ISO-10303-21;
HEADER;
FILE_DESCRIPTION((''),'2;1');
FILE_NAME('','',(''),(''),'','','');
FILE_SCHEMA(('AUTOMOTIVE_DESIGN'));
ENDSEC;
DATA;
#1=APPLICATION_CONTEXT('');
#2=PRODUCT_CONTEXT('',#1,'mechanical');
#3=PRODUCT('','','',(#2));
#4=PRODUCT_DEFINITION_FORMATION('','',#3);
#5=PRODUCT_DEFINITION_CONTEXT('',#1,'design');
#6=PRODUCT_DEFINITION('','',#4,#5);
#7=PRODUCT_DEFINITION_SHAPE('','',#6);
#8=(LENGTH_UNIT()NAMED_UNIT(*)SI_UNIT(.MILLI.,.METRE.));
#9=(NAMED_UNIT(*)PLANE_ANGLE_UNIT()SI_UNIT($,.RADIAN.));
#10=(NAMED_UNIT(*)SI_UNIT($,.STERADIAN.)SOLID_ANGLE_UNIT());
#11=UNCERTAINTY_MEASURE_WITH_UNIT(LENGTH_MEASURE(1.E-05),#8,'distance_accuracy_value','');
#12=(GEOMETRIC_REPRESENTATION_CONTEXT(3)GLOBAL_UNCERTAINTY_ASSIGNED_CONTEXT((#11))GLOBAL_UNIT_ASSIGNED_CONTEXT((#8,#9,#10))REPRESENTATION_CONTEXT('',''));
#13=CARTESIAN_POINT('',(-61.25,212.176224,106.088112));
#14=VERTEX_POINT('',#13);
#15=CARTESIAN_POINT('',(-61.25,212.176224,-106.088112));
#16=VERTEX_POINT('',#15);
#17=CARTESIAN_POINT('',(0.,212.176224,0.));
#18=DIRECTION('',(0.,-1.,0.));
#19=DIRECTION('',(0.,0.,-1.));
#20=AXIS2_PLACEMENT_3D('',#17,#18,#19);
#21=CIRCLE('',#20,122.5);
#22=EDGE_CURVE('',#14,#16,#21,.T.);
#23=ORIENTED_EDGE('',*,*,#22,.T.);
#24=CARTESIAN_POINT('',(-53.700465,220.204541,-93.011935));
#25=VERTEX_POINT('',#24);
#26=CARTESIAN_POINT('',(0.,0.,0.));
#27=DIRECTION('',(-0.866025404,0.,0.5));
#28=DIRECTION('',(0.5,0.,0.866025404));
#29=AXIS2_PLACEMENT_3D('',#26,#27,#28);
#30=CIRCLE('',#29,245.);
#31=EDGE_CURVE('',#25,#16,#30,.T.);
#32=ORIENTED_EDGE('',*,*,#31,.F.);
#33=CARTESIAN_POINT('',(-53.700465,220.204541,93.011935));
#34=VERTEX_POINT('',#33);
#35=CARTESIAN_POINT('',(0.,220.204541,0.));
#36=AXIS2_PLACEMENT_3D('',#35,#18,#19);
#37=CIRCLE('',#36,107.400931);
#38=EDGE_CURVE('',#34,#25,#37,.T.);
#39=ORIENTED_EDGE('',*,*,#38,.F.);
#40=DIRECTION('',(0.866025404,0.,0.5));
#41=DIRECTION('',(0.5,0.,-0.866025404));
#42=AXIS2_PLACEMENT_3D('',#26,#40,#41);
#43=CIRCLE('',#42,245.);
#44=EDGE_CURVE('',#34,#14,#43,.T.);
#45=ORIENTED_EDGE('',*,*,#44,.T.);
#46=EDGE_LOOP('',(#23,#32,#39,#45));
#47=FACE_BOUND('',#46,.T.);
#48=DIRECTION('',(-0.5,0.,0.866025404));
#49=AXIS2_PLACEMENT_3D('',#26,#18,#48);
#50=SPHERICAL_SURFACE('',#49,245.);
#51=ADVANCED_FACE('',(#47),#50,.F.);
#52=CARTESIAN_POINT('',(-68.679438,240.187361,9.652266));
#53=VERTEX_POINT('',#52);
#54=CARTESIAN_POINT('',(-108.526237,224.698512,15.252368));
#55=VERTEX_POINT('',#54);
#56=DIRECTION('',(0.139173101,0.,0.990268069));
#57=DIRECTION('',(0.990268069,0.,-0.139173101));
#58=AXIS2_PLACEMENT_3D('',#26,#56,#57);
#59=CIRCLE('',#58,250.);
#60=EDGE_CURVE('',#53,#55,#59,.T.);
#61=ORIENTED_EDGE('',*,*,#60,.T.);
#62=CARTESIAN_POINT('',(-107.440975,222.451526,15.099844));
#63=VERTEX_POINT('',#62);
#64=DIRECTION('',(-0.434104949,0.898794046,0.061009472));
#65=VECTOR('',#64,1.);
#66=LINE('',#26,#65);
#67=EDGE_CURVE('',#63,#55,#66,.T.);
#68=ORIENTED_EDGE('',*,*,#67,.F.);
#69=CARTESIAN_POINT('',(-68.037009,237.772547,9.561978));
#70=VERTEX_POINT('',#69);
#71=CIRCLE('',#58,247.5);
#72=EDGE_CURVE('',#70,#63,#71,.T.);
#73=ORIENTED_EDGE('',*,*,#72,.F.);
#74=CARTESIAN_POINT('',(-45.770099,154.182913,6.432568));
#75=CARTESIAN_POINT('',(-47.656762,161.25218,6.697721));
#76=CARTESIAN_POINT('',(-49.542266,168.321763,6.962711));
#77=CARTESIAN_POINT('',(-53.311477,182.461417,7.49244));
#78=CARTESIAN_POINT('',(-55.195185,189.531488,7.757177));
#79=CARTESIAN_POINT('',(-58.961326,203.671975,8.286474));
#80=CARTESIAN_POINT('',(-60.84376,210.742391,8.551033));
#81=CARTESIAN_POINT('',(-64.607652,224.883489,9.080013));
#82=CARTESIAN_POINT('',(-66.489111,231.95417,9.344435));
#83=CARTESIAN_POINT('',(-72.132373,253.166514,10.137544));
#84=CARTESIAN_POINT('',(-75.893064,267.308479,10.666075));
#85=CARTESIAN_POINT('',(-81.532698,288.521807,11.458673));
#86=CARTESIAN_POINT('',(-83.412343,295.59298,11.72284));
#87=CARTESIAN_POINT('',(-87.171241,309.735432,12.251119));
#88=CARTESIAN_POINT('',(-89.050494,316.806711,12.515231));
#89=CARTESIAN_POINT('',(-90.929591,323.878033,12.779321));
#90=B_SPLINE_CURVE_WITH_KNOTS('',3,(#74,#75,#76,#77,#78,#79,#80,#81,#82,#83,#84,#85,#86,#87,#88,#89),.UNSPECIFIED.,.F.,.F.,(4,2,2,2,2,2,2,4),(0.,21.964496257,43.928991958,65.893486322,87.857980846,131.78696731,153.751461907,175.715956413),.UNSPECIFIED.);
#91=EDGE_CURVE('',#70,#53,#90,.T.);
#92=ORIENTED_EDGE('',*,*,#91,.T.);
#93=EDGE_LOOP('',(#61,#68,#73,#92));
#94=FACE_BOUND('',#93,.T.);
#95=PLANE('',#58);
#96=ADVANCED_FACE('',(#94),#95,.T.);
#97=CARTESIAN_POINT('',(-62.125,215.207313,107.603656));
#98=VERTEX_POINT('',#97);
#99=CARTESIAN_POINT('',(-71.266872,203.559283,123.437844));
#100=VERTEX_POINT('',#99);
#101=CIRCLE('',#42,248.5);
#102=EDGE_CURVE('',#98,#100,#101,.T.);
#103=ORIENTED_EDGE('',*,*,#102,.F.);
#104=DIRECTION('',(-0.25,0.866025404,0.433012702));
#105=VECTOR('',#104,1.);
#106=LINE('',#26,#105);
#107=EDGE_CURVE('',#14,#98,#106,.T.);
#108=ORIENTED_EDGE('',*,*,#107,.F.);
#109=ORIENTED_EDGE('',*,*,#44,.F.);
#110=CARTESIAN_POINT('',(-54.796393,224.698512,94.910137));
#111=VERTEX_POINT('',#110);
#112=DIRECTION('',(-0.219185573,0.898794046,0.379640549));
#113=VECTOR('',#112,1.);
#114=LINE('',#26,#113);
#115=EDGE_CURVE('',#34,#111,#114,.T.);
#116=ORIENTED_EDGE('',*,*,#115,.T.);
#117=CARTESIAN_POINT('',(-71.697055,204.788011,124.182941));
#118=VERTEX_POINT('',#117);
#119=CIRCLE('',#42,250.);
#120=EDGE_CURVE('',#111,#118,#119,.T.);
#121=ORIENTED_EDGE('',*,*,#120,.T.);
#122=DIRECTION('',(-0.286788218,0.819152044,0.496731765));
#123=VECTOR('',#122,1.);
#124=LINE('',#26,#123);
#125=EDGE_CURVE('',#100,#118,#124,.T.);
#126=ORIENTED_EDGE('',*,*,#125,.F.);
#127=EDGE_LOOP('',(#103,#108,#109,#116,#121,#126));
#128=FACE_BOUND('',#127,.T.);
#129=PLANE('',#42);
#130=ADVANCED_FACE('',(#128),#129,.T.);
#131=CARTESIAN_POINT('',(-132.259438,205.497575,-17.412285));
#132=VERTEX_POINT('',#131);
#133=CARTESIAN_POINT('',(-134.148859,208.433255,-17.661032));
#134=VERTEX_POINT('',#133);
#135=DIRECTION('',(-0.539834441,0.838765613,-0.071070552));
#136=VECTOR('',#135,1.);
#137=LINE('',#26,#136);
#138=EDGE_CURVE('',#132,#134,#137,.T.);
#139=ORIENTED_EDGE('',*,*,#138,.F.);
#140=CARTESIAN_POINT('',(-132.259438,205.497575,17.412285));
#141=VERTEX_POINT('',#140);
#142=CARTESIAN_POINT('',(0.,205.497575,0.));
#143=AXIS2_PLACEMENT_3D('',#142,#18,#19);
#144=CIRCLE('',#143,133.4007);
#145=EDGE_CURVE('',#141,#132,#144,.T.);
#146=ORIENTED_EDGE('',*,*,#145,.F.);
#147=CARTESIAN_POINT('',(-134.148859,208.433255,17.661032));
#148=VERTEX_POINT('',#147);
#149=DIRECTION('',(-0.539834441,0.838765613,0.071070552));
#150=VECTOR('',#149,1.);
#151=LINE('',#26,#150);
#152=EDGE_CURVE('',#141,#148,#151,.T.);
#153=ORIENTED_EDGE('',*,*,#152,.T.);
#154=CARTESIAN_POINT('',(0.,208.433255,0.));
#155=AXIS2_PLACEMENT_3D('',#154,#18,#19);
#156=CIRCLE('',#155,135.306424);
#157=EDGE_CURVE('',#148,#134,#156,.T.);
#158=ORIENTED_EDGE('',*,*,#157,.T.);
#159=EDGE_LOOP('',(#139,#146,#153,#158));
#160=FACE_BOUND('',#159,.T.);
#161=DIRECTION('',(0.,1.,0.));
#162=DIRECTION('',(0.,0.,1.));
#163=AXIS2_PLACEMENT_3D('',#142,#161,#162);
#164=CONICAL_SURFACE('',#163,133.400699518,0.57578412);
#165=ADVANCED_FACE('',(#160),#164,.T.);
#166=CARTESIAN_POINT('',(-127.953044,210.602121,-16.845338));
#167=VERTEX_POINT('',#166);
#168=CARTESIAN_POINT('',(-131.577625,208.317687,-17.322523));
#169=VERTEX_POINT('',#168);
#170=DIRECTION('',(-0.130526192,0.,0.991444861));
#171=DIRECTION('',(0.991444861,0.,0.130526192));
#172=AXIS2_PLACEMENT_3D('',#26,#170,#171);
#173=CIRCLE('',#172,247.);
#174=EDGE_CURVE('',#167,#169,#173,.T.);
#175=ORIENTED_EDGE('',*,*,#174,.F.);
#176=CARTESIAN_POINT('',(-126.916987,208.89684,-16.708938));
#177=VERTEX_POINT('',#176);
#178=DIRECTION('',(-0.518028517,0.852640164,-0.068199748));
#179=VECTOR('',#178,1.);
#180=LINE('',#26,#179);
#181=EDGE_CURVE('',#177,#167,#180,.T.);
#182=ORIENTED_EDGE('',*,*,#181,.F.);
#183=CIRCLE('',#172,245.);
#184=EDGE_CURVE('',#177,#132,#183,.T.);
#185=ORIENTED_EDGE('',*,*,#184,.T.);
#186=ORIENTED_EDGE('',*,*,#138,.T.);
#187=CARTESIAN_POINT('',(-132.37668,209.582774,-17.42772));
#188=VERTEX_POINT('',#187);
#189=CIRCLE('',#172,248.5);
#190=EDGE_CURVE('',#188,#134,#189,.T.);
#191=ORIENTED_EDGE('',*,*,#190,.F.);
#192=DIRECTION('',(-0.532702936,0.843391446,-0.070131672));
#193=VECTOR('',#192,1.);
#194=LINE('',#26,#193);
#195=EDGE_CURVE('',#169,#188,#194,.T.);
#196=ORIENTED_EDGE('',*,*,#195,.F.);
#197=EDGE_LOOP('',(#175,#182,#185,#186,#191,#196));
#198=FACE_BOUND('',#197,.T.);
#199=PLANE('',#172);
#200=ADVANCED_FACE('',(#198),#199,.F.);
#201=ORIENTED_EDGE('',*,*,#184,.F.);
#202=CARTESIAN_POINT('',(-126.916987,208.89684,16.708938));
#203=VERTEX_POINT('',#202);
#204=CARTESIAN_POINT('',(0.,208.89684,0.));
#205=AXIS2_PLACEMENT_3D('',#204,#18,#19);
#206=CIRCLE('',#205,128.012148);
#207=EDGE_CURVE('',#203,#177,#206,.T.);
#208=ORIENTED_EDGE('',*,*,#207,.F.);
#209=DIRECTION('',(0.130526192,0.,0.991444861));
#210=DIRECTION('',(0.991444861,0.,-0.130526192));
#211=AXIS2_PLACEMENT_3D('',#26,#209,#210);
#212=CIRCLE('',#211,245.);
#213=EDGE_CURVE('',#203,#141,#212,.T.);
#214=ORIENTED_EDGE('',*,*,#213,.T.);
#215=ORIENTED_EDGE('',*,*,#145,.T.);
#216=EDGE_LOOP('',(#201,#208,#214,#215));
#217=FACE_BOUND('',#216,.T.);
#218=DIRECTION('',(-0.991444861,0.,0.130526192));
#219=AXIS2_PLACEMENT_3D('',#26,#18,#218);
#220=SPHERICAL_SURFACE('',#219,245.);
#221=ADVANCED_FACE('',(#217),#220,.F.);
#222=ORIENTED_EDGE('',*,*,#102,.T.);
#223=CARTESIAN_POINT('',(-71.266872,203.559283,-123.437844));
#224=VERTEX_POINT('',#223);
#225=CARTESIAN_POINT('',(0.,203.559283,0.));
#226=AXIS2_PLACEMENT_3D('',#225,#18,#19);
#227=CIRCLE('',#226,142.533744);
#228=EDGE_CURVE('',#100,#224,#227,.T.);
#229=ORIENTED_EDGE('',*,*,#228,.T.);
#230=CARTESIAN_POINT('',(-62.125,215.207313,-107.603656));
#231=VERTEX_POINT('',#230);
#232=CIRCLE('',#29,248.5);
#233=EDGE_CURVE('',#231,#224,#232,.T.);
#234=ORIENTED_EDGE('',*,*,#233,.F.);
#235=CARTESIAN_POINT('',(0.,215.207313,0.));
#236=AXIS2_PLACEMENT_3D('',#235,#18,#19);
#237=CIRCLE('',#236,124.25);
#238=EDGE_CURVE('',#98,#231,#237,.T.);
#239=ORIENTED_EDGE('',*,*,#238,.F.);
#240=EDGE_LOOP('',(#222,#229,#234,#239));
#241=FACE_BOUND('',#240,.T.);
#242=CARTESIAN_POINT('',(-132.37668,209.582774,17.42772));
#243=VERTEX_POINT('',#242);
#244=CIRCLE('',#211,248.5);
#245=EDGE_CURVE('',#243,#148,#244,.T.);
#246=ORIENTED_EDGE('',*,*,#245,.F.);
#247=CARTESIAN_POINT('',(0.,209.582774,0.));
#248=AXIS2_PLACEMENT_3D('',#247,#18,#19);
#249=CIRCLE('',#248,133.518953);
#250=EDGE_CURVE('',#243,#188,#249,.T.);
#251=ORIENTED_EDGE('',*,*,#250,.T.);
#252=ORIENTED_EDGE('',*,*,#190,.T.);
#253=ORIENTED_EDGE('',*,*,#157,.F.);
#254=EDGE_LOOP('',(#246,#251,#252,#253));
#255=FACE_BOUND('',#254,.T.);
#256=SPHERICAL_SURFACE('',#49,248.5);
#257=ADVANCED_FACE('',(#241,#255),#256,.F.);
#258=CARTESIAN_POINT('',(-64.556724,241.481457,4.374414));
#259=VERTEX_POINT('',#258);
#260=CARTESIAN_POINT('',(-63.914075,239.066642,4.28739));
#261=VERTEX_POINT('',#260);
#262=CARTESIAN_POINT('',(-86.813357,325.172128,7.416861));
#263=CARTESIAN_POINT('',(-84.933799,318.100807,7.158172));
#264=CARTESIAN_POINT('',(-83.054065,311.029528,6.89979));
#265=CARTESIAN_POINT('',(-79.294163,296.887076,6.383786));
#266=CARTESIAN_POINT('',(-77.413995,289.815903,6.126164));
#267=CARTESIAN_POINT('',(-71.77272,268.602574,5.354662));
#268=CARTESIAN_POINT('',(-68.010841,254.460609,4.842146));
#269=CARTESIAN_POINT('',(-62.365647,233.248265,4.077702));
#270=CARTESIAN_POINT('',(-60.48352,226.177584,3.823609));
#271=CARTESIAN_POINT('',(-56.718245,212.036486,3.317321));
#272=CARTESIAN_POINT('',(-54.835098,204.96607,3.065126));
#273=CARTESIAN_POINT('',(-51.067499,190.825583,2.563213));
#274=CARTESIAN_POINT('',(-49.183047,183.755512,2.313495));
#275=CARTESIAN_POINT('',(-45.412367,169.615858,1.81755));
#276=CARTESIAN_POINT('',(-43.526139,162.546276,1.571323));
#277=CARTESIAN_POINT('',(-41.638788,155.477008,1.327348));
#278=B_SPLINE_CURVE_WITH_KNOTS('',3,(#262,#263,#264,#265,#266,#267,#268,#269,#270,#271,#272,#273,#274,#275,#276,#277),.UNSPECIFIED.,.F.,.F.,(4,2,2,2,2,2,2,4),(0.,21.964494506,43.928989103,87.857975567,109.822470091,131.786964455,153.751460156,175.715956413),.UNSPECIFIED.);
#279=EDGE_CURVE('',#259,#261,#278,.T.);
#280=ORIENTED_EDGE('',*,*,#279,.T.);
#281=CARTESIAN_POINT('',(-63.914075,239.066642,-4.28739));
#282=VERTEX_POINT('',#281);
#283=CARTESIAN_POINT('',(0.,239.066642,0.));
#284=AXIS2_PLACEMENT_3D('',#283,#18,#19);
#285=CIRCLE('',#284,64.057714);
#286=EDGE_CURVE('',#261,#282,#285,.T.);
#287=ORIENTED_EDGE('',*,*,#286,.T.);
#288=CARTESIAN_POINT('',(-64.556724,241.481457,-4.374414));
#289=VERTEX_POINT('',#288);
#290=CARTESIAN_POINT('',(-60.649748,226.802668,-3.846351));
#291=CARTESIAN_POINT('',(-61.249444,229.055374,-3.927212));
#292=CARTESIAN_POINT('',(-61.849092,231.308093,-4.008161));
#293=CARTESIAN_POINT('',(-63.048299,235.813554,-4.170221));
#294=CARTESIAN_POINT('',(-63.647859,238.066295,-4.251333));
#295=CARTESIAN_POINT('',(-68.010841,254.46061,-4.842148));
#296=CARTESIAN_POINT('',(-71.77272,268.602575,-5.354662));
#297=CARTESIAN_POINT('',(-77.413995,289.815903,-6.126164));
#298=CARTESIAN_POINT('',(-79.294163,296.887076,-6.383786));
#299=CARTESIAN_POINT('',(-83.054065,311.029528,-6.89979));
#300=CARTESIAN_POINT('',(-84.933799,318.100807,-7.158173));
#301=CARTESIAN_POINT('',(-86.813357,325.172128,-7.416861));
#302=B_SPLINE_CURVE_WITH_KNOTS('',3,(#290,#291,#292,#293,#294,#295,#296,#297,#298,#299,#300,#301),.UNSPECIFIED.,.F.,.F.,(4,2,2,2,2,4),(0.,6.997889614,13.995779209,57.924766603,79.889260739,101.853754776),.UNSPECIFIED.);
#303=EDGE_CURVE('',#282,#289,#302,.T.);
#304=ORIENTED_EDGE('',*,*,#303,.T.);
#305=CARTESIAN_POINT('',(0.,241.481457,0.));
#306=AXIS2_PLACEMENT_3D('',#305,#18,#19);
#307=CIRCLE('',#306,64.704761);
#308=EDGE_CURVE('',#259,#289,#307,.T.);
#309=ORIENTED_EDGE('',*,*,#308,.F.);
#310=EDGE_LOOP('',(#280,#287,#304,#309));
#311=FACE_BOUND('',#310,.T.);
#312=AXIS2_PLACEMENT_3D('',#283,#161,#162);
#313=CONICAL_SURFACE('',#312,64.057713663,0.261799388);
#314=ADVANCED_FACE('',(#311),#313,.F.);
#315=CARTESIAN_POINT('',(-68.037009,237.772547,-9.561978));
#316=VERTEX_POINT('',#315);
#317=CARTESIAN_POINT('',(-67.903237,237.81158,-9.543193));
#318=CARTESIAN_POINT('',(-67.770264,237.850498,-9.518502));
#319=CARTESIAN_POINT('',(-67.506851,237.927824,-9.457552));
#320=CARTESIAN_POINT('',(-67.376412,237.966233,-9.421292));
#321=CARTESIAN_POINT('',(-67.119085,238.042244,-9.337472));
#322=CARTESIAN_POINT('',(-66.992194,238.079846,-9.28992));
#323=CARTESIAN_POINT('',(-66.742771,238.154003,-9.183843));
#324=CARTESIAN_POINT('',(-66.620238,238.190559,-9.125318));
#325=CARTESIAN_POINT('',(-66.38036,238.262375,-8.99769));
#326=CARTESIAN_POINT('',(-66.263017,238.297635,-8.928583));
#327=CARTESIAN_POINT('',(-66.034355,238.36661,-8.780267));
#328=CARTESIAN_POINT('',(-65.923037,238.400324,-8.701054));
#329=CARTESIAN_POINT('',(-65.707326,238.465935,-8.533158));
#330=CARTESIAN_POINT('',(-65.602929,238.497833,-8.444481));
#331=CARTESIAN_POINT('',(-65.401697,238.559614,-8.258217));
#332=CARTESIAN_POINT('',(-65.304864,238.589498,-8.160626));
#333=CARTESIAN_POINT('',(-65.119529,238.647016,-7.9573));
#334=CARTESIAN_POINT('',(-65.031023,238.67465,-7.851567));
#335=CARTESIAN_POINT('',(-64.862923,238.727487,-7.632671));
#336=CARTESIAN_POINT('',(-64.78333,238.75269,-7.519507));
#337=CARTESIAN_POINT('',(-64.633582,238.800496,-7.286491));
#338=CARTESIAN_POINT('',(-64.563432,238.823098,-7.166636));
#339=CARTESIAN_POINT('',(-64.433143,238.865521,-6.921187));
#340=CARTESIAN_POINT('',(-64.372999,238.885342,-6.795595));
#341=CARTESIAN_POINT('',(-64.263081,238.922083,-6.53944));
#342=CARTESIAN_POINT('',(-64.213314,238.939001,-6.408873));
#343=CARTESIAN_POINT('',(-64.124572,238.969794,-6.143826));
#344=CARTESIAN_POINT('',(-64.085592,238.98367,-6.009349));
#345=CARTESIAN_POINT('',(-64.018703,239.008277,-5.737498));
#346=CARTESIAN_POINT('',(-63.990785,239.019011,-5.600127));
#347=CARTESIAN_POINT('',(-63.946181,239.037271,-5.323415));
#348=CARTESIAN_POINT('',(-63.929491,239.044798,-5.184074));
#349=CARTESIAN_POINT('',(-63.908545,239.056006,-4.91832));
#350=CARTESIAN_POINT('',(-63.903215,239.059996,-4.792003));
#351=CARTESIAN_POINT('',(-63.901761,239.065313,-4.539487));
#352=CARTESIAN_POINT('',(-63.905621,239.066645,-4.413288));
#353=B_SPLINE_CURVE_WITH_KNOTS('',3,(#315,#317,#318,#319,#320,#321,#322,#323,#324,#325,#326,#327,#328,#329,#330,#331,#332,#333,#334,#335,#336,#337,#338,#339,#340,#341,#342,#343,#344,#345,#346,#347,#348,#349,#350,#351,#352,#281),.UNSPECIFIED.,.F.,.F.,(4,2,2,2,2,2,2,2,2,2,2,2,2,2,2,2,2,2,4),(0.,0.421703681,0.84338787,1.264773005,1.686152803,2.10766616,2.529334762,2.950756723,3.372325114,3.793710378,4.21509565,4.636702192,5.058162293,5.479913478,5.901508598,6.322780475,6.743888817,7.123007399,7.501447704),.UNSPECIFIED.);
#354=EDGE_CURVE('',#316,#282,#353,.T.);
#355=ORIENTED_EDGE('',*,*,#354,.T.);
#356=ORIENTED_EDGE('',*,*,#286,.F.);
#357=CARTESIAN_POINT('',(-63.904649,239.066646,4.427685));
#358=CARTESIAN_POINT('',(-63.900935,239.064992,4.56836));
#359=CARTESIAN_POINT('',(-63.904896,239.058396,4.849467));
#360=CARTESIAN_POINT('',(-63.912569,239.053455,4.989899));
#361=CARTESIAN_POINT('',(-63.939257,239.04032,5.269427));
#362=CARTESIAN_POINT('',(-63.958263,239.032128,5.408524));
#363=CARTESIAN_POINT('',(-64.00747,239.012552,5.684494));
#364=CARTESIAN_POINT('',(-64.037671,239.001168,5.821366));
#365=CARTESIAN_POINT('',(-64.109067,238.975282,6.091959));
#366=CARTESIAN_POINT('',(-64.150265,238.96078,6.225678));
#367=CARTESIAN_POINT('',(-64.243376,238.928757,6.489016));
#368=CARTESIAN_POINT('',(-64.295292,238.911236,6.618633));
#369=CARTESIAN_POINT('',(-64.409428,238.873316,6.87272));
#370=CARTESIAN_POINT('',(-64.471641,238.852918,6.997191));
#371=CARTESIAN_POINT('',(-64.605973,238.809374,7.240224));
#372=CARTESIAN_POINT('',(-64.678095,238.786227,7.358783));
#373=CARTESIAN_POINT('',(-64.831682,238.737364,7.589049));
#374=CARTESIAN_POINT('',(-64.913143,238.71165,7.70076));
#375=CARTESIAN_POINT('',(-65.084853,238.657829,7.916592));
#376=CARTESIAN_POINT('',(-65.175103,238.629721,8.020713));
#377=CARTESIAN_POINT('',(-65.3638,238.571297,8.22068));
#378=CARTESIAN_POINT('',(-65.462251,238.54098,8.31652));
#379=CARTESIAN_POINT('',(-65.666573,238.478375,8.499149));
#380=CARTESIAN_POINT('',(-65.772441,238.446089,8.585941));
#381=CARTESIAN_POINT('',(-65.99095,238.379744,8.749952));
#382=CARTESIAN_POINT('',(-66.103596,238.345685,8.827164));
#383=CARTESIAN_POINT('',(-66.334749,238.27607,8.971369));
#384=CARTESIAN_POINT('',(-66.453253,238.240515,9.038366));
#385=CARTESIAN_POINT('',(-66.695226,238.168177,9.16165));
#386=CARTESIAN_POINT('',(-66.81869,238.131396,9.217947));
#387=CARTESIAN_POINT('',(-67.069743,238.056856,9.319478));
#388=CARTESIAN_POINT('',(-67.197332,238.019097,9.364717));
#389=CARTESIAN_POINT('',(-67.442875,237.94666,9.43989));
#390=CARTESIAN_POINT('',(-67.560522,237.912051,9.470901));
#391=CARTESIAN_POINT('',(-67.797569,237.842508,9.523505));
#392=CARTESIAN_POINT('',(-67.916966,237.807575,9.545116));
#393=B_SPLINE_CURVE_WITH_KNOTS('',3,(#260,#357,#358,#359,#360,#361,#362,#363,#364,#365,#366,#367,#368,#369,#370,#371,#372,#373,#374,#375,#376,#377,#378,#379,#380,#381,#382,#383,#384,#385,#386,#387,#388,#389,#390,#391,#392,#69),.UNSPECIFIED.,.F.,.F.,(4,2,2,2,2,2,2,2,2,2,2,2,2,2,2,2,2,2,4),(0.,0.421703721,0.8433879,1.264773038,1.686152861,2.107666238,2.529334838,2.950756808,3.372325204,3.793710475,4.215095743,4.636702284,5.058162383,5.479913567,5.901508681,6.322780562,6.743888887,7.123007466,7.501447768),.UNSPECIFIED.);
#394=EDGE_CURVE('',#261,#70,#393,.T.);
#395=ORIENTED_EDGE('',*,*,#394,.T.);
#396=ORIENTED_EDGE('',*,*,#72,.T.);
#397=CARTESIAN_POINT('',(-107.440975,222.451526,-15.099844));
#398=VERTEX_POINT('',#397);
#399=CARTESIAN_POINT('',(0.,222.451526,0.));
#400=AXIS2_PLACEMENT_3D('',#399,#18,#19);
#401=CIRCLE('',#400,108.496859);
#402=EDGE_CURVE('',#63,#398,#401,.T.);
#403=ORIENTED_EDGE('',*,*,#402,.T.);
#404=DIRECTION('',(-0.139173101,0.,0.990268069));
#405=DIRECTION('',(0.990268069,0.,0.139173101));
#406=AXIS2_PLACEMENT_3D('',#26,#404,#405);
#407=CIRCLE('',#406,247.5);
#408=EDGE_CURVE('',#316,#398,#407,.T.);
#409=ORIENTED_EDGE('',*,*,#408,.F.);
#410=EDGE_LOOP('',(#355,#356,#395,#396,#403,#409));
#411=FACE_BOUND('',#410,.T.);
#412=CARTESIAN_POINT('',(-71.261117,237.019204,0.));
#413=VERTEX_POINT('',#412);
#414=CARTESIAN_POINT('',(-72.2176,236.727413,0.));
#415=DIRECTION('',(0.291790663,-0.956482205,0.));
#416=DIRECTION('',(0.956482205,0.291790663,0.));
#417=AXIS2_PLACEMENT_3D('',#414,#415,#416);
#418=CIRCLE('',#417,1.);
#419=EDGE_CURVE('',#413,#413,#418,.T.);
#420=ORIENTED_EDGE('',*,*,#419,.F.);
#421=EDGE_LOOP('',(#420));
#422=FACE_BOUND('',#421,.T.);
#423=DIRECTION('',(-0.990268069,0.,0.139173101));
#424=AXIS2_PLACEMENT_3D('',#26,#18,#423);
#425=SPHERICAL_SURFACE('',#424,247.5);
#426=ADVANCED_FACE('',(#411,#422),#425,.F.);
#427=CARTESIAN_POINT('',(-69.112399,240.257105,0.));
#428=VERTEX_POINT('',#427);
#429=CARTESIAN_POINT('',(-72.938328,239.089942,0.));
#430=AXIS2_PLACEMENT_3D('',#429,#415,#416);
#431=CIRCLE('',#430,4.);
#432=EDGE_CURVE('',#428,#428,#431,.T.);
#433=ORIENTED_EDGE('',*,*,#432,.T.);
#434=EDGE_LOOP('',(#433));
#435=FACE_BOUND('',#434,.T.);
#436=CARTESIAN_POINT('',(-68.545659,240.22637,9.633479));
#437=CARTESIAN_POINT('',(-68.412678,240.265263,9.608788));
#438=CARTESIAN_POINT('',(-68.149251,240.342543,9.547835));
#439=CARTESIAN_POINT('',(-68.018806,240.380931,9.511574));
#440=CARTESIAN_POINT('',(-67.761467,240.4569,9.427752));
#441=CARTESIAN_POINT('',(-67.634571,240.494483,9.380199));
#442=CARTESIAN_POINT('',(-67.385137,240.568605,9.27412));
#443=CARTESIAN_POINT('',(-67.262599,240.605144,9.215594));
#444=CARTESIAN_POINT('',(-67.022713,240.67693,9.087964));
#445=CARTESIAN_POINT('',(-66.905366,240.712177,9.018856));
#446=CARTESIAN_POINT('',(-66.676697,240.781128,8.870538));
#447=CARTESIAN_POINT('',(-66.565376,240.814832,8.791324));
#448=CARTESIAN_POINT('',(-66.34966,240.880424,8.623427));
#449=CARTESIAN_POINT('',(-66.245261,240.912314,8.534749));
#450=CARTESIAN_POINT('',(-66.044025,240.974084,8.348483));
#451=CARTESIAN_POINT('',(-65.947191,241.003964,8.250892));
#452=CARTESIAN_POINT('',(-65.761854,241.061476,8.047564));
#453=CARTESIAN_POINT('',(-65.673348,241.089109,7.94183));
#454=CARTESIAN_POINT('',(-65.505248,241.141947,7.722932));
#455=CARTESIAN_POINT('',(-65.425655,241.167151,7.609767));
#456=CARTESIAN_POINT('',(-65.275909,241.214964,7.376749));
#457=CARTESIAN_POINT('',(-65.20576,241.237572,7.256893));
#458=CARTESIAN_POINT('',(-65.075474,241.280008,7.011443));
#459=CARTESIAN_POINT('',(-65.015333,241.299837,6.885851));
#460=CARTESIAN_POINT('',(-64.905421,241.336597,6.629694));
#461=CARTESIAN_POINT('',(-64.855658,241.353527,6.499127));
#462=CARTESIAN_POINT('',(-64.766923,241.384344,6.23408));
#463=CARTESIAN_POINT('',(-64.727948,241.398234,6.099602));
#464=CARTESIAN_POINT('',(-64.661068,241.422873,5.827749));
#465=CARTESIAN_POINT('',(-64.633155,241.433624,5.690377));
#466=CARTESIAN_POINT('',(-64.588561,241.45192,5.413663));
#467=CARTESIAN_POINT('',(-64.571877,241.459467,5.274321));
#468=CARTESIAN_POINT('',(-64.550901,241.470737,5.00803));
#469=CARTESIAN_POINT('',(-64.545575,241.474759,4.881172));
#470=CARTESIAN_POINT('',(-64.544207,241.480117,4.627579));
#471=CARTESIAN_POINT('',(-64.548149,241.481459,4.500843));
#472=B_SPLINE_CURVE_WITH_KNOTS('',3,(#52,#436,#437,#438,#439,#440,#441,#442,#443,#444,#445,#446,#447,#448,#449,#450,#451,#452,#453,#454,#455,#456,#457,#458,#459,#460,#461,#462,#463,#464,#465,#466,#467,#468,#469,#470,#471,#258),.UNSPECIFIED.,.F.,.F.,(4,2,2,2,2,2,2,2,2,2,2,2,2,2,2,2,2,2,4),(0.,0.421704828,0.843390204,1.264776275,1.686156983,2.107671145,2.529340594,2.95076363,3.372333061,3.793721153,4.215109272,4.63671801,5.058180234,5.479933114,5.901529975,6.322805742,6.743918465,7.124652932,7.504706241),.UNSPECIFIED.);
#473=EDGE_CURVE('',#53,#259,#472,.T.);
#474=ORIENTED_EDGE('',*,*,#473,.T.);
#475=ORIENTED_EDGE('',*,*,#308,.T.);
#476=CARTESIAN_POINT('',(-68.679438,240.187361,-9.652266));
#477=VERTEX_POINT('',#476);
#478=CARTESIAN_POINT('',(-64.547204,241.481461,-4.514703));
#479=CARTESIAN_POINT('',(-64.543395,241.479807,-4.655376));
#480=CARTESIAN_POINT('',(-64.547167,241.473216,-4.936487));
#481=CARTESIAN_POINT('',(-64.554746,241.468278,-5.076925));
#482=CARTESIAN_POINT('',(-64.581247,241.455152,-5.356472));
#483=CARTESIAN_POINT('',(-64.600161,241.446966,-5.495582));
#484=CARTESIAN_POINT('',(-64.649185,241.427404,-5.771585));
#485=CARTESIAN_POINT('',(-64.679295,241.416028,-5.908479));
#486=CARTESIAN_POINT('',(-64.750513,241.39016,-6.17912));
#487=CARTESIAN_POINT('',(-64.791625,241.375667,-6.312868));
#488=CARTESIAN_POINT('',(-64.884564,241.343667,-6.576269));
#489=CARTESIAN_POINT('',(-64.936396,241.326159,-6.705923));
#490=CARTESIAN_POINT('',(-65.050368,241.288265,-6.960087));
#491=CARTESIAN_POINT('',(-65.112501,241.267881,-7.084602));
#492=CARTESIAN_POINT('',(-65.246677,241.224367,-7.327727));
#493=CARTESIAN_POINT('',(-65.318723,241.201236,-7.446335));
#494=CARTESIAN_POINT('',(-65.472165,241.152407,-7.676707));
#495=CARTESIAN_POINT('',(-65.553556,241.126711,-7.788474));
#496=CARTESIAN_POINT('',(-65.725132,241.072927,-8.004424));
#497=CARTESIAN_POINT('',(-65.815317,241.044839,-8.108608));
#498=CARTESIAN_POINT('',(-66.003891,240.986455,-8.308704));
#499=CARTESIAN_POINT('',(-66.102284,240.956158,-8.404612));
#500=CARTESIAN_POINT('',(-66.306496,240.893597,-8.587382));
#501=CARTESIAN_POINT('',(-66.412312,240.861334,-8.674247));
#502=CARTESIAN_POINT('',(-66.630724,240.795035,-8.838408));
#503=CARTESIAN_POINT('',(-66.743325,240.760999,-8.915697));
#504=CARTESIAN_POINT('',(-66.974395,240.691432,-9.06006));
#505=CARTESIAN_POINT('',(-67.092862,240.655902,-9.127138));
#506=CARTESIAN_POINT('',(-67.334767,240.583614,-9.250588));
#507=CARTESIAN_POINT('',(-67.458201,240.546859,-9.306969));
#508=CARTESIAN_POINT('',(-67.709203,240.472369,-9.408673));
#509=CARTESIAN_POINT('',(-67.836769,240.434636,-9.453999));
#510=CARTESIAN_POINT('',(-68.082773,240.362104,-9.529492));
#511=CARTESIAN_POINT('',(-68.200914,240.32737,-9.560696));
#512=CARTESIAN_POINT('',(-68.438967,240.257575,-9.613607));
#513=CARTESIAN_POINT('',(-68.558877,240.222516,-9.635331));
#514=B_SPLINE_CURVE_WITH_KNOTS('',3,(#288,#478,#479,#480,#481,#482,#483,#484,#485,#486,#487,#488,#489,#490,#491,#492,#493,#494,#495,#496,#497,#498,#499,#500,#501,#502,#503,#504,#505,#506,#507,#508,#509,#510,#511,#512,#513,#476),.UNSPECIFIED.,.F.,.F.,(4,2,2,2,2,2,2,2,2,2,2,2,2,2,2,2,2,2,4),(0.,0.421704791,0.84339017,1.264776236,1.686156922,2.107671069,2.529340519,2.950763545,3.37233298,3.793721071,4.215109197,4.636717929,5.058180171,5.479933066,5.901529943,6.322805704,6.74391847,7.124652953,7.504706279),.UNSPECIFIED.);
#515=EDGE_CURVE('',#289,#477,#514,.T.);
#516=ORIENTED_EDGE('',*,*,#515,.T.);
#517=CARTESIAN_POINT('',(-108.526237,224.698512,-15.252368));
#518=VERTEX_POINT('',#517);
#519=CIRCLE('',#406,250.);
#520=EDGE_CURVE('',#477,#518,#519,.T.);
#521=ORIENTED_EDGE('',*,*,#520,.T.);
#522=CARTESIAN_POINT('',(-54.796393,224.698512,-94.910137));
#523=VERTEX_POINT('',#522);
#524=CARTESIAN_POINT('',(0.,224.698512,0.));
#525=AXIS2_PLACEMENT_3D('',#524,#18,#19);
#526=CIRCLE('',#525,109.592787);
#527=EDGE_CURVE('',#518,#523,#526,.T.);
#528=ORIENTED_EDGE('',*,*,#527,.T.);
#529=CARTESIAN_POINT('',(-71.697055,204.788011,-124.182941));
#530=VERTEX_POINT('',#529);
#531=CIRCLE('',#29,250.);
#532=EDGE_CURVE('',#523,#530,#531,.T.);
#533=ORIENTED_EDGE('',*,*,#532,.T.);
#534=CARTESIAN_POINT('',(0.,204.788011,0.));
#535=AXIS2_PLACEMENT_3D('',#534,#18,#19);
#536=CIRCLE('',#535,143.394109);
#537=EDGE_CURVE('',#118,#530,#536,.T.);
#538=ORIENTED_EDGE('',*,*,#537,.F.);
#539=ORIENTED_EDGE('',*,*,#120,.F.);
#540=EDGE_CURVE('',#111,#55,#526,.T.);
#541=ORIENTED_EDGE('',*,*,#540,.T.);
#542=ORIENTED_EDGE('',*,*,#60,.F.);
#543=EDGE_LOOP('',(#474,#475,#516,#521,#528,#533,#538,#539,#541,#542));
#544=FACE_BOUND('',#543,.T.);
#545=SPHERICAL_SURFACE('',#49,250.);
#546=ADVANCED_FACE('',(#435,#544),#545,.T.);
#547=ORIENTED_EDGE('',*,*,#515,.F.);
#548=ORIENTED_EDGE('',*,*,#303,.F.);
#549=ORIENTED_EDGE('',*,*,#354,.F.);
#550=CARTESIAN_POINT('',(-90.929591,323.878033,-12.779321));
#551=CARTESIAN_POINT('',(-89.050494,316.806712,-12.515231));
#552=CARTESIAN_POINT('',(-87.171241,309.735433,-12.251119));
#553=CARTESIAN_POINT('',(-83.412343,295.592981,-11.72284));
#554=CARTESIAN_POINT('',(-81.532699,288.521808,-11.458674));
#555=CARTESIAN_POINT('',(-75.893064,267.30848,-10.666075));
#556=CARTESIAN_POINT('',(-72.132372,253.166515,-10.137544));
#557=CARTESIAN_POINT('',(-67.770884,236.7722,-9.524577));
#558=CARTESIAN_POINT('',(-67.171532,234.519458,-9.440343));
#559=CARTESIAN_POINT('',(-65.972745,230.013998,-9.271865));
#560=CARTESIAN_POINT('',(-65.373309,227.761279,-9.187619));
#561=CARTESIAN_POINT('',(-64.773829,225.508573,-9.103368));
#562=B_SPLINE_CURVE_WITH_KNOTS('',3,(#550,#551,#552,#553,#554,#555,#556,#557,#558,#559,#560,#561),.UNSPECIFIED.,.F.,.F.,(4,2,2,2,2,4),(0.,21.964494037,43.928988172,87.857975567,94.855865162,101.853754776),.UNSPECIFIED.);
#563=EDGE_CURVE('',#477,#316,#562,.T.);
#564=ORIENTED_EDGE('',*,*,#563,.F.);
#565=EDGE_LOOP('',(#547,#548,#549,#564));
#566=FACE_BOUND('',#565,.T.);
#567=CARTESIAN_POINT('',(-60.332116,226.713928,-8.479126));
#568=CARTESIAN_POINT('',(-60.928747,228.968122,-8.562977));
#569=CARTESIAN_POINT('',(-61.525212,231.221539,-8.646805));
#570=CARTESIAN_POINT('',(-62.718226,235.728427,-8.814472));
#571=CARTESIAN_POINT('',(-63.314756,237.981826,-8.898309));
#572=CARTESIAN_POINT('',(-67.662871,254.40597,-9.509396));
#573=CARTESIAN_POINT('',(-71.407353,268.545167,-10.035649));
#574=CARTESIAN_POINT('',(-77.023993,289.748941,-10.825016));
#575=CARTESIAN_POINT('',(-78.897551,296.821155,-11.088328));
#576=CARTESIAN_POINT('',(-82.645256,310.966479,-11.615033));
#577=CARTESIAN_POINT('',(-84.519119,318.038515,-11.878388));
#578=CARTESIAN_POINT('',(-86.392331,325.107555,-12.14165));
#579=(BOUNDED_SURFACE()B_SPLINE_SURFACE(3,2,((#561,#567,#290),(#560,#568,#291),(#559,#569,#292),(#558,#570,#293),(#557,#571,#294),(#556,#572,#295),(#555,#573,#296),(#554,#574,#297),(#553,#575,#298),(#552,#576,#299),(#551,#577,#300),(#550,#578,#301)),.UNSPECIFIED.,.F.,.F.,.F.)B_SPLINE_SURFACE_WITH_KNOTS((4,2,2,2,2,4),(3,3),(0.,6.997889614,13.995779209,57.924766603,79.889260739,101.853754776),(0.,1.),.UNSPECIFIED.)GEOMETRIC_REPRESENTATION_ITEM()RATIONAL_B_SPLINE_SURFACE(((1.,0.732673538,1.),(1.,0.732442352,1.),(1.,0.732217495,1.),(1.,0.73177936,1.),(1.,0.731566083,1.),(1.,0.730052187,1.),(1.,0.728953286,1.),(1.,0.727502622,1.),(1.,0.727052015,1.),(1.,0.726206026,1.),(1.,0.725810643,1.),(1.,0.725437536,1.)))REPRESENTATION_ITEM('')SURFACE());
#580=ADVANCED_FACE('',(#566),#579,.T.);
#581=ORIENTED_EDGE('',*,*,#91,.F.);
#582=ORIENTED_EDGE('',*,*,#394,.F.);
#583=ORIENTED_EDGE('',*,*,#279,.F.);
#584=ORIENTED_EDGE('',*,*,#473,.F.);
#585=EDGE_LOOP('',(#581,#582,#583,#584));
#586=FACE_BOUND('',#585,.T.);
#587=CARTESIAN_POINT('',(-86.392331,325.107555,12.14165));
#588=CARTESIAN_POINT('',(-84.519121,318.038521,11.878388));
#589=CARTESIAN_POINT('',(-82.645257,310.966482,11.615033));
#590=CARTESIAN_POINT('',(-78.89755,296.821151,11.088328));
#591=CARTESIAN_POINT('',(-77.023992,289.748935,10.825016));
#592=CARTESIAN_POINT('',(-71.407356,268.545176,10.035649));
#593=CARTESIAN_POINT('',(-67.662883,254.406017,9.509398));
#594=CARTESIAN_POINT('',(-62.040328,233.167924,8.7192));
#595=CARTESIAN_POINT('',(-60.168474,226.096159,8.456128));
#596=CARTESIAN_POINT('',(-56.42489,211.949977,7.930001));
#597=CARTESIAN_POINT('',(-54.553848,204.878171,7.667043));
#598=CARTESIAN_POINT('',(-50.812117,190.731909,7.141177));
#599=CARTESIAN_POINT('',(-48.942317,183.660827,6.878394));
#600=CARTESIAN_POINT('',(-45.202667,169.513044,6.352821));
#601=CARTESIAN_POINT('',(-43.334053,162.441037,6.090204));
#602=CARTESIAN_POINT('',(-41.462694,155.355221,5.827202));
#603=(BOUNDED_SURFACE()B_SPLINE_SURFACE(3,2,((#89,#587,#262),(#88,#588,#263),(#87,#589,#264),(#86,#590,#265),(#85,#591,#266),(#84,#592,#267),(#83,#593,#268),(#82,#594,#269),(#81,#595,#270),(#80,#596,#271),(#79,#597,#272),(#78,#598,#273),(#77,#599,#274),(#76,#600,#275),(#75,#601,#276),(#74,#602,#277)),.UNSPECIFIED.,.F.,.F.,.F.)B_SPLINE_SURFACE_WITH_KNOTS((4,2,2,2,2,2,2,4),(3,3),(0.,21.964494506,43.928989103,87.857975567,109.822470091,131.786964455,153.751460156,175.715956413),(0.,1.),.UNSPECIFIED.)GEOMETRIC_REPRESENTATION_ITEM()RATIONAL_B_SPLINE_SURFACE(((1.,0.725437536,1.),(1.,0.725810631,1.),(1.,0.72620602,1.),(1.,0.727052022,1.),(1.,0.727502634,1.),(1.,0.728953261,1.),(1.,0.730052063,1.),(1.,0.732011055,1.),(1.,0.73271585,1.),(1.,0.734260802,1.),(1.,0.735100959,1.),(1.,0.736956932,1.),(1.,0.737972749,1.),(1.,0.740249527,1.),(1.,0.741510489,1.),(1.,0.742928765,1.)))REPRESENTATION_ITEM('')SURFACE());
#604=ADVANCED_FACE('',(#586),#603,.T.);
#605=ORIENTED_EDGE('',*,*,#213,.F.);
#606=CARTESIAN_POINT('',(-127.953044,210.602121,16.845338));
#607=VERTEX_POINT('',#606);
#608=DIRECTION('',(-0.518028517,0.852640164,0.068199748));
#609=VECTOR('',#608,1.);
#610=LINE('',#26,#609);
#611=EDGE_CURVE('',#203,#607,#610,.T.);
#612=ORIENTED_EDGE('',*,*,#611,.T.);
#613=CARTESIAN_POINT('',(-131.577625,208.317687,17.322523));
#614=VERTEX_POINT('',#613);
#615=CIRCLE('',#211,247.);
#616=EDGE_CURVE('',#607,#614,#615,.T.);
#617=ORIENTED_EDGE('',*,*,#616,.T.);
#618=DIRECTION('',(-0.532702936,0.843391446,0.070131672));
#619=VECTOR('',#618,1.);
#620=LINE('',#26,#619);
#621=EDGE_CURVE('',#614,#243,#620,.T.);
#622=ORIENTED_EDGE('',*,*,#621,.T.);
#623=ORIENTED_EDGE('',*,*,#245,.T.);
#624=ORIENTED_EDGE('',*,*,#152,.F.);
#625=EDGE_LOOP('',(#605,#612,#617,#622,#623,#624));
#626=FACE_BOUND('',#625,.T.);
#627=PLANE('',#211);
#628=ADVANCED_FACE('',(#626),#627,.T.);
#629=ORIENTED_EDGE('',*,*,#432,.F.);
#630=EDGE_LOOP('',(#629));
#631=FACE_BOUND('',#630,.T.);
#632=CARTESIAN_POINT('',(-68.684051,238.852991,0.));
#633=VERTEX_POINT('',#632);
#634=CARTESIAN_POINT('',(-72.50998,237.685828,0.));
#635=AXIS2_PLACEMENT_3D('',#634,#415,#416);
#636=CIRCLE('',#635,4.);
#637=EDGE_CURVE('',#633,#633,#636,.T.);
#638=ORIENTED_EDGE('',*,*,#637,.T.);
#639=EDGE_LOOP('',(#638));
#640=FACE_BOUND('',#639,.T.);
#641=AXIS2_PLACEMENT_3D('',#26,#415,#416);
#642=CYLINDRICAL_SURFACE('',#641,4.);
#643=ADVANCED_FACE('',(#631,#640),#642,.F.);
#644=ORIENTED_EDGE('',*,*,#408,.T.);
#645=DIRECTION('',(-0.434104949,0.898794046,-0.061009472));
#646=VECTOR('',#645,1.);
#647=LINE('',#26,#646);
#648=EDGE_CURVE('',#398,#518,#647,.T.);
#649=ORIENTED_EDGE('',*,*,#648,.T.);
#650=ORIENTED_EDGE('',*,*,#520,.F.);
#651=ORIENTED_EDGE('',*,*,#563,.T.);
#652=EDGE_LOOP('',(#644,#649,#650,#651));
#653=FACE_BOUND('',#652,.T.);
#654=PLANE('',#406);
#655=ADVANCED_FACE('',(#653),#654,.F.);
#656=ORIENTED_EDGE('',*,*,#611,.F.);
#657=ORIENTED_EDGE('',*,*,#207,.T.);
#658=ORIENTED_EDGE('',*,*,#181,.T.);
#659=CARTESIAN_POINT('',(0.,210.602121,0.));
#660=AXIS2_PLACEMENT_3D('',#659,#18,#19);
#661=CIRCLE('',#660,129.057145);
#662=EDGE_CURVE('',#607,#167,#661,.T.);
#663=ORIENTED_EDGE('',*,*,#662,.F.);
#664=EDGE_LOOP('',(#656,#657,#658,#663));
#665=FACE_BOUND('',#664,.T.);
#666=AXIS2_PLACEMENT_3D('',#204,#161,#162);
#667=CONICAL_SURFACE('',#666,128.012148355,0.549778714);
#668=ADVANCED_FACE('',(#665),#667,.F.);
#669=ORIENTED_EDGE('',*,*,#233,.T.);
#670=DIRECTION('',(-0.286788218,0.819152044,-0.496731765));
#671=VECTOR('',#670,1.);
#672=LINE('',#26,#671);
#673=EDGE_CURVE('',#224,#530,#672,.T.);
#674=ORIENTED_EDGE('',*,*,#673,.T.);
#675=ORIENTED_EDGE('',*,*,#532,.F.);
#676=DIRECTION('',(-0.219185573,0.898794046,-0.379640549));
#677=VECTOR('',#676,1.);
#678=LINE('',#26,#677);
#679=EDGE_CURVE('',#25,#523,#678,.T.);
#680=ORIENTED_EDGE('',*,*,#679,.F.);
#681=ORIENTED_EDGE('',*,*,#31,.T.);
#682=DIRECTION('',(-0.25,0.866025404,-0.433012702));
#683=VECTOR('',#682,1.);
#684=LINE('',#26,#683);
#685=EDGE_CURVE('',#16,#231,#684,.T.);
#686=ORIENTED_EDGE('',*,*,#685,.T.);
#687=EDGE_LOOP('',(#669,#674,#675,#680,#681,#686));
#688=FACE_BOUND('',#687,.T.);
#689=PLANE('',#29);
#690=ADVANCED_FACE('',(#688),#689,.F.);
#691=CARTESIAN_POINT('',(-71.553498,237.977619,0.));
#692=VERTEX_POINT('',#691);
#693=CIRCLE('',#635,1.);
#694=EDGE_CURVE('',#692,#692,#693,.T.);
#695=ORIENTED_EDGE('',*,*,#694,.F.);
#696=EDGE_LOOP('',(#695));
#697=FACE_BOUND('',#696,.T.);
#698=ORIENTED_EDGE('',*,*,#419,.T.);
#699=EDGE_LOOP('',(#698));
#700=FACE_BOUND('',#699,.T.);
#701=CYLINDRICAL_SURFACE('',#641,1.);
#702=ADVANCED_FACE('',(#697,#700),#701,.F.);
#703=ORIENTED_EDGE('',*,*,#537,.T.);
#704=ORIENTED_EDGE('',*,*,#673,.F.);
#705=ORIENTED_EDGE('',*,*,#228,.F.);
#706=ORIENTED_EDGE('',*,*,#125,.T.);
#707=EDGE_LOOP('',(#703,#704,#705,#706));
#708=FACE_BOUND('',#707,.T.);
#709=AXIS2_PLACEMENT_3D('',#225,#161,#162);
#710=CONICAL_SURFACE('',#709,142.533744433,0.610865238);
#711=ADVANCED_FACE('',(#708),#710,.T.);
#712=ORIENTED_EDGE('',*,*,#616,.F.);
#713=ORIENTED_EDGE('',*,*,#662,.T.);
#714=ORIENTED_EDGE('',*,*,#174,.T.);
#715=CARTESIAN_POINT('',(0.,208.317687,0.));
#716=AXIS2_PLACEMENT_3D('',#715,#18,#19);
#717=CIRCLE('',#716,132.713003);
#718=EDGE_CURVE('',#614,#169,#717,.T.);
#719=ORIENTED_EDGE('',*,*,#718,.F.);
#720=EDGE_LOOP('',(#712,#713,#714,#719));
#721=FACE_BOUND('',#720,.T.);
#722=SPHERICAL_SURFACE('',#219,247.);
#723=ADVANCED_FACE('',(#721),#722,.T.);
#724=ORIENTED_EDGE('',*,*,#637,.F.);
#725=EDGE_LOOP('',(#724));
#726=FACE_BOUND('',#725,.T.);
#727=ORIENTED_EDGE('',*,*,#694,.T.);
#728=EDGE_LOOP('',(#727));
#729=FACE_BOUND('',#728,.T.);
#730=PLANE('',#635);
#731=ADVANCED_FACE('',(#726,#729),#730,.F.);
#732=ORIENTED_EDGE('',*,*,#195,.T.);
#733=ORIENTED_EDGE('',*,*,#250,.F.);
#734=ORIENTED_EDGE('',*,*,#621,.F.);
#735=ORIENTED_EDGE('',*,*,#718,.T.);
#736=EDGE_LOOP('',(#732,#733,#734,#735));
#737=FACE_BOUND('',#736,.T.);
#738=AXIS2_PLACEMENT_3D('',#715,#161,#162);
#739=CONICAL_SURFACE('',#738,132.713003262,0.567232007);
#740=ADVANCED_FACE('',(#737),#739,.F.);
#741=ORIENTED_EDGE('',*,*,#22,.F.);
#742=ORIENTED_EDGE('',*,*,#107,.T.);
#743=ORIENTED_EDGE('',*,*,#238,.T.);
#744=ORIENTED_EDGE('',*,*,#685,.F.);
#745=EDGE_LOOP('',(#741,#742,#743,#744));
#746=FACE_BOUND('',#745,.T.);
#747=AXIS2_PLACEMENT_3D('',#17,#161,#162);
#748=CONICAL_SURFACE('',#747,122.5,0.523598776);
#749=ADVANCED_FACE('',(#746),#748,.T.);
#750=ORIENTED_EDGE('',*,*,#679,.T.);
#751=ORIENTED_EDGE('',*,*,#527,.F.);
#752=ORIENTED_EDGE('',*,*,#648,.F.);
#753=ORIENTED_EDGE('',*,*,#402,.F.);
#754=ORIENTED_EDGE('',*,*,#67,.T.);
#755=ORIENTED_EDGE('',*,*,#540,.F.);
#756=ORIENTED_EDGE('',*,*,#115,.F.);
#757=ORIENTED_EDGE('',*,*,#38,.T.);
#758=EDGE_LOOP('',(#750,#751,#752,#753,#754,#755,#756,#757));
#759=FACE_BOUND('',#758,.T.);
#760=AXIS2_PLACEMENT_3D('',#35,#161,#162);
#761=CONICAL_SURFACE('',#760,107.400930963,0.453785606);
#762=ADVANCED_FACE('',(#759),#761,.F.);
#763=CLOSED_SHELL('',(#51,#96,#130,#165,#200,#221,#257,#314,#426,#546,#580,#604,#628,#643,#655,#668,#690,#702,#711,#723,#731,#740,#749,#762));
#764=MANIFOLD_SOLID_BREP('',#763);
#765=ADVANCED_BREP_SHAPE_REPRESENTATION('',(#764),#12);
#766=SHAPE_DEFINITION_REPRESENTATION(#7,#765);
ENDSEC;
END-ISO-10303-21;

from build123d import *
from build123d.topology import SkipClean

# Parameters (mm, degrees)
REVOLVE2_ANGLE           = 60
REVOLVE2_OTHER_WAY_ANGLE = 60
REVOLVE3_ANGLE           = 8
REVOLVE3_OTHER_WAY_ANGLE = 8
FILLET1_R                = 5
CUT_REVOLVE1_START       = -250
CUT_REVOLVE1_OUTLINE_R   = 4
CUT_REVOLVE1_DEPTH       = 1.5
CUT_REVOLVE1_START_2     = -248.5
CUT_REVOLVE1_2_OUTLINE_R = 1
CUT_REVOLVE1_2_DEPTH     = 1.00202031
REVOLVE4_ANGLE           = 7.5
REVOLVE4_OTHER_WAY_ANGLE = 7.5


# Read off the part's stored shape, not the designer's step: Cut-Revolve1
with BuildPart() as part:
    # Sketch1 → Revolve2 (revolve)
    with BuildSketch(Plane.XY):
        with BuildLine():
            Line((-124.25, 215.20731284), (-122.5, 212.176223927))
            ThreePointArc((-122.5, 212.176223927), (-115.020532883, 216.32216025), (-107.400930963, 220.204541343))
            Line((-107.400930963, 220.204541343), (-109.592786697, 224.698511575))
            ThreePointArc((-109.592786697, 224.698511575), (-126.88459074, 215.40729011), (-143.394109088, 204.788011072))
            Line((-143.394109088, 204.788011072), (-142.533744433, 203.559283006))
            ThreePointArc((-142.533744433, 203.559283006), (-133.518952674, 209.582774284), (-124.25, 215.20731284))
        make_face()
    revolve(axis=Axis((0, 0, 0), (0, 1, 0)), revolution_arc=REVOLVE2_ANGLE)

    # Sketch1 → Revolve2 other way (revolve)
    with BuildSketch(Plane.XY):
        with BuildLine():
            Line((-124.25, 215.20731284), (-122.5, 212.176223927))
            ThreePointArc((-122.5, 212.176223927), (-115.020532883, 216.32216025), (-107.400930963, 220.204541343))
            Line((-107.400930963, 220.204541343), (-109.592786697, 224.698511575))
            ThreePointArc((-109.592786697, 224.698511575), (-126.88459074, 215.40729011), (-143.394109088, 204.788011072))
            Line((-143.394109088, 204.788011072), (-142.533744433, 203.559283006))
            ThreePointArc((-142.533744433, 203.559283006), (-133.518952674, 209.582774284), (-124.25, 215.20731284))
        make_face()
    revolve(axis=Axis((0, 0, 0), (0, -1, 0)), revolution_arc=REVOLVE2_OTHER_WAY_ANGLE)

    # Sketch2 → Revolve3 (revolve)
    with BuildSketch(Plane.XY):
        with BuildLine():
            ThreePointArc((-108.49685883, 222.451526459), (-86.676326862, 231.826366839), (-64.057713663, 239.066642007))
            Line((-64.057713663, 239.066642007), (-64.704761276, 241.481456572))
            ThreePointArc((-64.704761276, 241.481456572), (-87.551845315, 234.168047312), (-109.592786697, 224.698511575))
            Line((-109.592786697, 224.698511575), (-108.49685883, 222.451526459))
        make_face()
    revolve(axis=Axis((0, 0, 0), (0, 1, 0)), revolution_arc=REVOLVE3_ANGLE)

    # Sketch2 → Revolve3 other way (revolve)
    with BuildSketch(Plane.XY):
        with BuildLine():
            ThreePointArc((-108.49685883, 222.451526459), (-86.676326862, 231.826366839), (-64.057713663, 239.066642007))
            Line((-64.057713663, 239.066642007), (-64.704761276, 241.481456572))
            ThreePointArc((-64.704761276, 241.481456572), (-87.551845315, 234.168047312), (-109.592786697, 224.698511575))
            Line((-109.592786697, 224.698511575), (-108.49685883, 222.451526459))
        make_face()
    revolve(axis=Axis((0, 0, 0), (0, -1, 0)), revolution_arc=REVOLVE3_OTHER_WAY_ANGLE)

    # Fillet1
    fillet1_edges = [part.edges().sort_by_distance(p)[0] for p in [
        (-63.754683692, 240.274049289, -8.960136462),
        (-63.754683692, 240.274049289, 8.960136462),
    ]]
    fillet(fillet1_edges, radius=FILLET1_R)

    # Cut-Revolve1 outline → Cut-Revolve1 (cut)
    with SkipClean():  # the faces are left unmerged after this step: merging them gives an invalid solid
        with BuildSketch(Plane(origin=(0, 0, 0), x_dir=(0.9564822051761176, 0.29179066328693826, 0), z_dir=(0.2917906632869382, -0.9564822051761177, 0)).offset(CUT_REVOLVE1_START)):
            Circle(CUT_REVOLVE1_OUTLINE_R)
        extrude(amount=CUT_REVOLVE1_DEPTH, mode=Mode.SUBTRACT)

    # Cut-Revolve1 2 outline → Cut-Revolve1 2 (cut)
    with SkipClean():  # the faces are left unmerged after this step: merging them gives an invalid solid
        with BuildSketch(Plane(origin=(0, 0, 0), x_dir=(0.9564822051761176, 0.29179066328693826, 0), z_dir=(0.2917906632869382, -0.9564822051761177, 0)).offset(CUT_REVOLVE1_START_2)):
            Circle(CUT_REVOLVE1_2_OUTLINE_R)
        extrude(amount=CUT_REVOLVE1_2_DEPTH, mode=Mode.SUBTRACT)

    # Sketch4 → Revolve4 (revolve)
    with SkipClean():  # the faces are left unmerged after this step: merging them gives an invalid solid
        with BuildSketch(Plane.XY):
            with BuildLine():
                Line((-135.306423797, 208.433254735), (-134.48968482, 207.175106316))
                ThreePointArc((-134.48968482, 207.175106316), (-133.602565478, 207.748296017), (-132.713003262, 208.317687116))
                Line((-132.713003262, 208.317687116), (-133.518952674, 209.582774285))
                ThreePointArc((-133.518952674, 209.582774285), (-134.41391709, 209.009925345), (-135.306423797, 208.433254735))
            make_face()
            with BuildLine():
                Line((-134.48968482, 207.175106316), (-133.400699518, 205.497575091))
                ThreePointArc((-133.400699518, 205.497575091), (-132.520763328, 206.066123579), (-131.638404045, 206.630904224))
                Line((-131.638404045, 206.630904224), (-132.713003262, 208.317687116))
                ThreePointArc((-132.713003262, 208.317687116), (-133.602565478, 207.748296017), (-134.48968482, 207.175106316))
            make_face()
            with BuildLine():
                Line((-132.713003262, 208.317687116), (-131.638404045, 206.630904224))
                ThreePointArc((-131.638404045, 206.630904224), (-129.830219737, 207.771783558), (-128.012148355, 208.896840267))
                Line((-128.012148355, 208.896840267), (-129.057145485, 210.602120595))
                ThreePointArc((-129.057145485, 210.602120595), (-130.890058266, 209.467879751), (-132.713003262, 208.317687116))
            make_face()
        revolve(axis=Axis((0, 0, 0), (0, 1, 0)), revolution_arc=REVOLVE4_ANGLE)

    # Sketch4 → Revolve4 other way (revolve)
    with SkipClean():  # the faces are left unmerged after this step: merging them gives an invalid solid
        with BuildSketch(Plane.XY):
            with BuildLine():
                Line((-135.306423797, 208.433254735), (-134.48968482, 207.175106316))
                ThreePointArc((-134.48968482, 207.175106316), (-133.602565478, 207.748296017), (-132.713003262, 208.317687116))
                Line((-132.713003262, 208.317687116), (-133.518952674, 209.582774285))
                ThreePointArc((-133.518952674, 209.582774285), (-134.41391709, 209.009925345), (-135.306423797, 208.433254735))
            make_face()
            with BuildLine():
                Line((-134.48968482, 207.175106316), (-133.400699518, 205.497575091))
                ThreePointArc((-133.400699518, 205.497575091), (-132.520763328, 206.066123579), (-131.638404045, 206.630904224))
                Line((-131.638404045, 206.630904224), (-132.713003262, 208.317687116))
                ThreePointArc((-132.713003262, 208.317687116), (-133.602565478, 207.748296017), (-134.48968482, 207.175106316))
            make_face()
            with BuildLine():
                Line((-132.713003262, 208.317687116), (-131.638404045, 206.630904224))
                ThreePointArc((-131.638404045, 206.630904224), (-129.830219737, 207.771783558), (-128.012148355, 208.896840267))
                Line((-128.012148355, 208.896840267), (-129.057145485, 210.602120595))
                ThreePointArc((-129.057145485, 210.602120595), (-130.890058266, 209.467879751), (-132.713003262, 208.317687116))
            make_face()
        revolve(axis=Axis((0, 0, 0), (0, -1, 0)), revolution_arc=REVOLVE4_OTHER_WAY_ANGLE)


solid = part.part
